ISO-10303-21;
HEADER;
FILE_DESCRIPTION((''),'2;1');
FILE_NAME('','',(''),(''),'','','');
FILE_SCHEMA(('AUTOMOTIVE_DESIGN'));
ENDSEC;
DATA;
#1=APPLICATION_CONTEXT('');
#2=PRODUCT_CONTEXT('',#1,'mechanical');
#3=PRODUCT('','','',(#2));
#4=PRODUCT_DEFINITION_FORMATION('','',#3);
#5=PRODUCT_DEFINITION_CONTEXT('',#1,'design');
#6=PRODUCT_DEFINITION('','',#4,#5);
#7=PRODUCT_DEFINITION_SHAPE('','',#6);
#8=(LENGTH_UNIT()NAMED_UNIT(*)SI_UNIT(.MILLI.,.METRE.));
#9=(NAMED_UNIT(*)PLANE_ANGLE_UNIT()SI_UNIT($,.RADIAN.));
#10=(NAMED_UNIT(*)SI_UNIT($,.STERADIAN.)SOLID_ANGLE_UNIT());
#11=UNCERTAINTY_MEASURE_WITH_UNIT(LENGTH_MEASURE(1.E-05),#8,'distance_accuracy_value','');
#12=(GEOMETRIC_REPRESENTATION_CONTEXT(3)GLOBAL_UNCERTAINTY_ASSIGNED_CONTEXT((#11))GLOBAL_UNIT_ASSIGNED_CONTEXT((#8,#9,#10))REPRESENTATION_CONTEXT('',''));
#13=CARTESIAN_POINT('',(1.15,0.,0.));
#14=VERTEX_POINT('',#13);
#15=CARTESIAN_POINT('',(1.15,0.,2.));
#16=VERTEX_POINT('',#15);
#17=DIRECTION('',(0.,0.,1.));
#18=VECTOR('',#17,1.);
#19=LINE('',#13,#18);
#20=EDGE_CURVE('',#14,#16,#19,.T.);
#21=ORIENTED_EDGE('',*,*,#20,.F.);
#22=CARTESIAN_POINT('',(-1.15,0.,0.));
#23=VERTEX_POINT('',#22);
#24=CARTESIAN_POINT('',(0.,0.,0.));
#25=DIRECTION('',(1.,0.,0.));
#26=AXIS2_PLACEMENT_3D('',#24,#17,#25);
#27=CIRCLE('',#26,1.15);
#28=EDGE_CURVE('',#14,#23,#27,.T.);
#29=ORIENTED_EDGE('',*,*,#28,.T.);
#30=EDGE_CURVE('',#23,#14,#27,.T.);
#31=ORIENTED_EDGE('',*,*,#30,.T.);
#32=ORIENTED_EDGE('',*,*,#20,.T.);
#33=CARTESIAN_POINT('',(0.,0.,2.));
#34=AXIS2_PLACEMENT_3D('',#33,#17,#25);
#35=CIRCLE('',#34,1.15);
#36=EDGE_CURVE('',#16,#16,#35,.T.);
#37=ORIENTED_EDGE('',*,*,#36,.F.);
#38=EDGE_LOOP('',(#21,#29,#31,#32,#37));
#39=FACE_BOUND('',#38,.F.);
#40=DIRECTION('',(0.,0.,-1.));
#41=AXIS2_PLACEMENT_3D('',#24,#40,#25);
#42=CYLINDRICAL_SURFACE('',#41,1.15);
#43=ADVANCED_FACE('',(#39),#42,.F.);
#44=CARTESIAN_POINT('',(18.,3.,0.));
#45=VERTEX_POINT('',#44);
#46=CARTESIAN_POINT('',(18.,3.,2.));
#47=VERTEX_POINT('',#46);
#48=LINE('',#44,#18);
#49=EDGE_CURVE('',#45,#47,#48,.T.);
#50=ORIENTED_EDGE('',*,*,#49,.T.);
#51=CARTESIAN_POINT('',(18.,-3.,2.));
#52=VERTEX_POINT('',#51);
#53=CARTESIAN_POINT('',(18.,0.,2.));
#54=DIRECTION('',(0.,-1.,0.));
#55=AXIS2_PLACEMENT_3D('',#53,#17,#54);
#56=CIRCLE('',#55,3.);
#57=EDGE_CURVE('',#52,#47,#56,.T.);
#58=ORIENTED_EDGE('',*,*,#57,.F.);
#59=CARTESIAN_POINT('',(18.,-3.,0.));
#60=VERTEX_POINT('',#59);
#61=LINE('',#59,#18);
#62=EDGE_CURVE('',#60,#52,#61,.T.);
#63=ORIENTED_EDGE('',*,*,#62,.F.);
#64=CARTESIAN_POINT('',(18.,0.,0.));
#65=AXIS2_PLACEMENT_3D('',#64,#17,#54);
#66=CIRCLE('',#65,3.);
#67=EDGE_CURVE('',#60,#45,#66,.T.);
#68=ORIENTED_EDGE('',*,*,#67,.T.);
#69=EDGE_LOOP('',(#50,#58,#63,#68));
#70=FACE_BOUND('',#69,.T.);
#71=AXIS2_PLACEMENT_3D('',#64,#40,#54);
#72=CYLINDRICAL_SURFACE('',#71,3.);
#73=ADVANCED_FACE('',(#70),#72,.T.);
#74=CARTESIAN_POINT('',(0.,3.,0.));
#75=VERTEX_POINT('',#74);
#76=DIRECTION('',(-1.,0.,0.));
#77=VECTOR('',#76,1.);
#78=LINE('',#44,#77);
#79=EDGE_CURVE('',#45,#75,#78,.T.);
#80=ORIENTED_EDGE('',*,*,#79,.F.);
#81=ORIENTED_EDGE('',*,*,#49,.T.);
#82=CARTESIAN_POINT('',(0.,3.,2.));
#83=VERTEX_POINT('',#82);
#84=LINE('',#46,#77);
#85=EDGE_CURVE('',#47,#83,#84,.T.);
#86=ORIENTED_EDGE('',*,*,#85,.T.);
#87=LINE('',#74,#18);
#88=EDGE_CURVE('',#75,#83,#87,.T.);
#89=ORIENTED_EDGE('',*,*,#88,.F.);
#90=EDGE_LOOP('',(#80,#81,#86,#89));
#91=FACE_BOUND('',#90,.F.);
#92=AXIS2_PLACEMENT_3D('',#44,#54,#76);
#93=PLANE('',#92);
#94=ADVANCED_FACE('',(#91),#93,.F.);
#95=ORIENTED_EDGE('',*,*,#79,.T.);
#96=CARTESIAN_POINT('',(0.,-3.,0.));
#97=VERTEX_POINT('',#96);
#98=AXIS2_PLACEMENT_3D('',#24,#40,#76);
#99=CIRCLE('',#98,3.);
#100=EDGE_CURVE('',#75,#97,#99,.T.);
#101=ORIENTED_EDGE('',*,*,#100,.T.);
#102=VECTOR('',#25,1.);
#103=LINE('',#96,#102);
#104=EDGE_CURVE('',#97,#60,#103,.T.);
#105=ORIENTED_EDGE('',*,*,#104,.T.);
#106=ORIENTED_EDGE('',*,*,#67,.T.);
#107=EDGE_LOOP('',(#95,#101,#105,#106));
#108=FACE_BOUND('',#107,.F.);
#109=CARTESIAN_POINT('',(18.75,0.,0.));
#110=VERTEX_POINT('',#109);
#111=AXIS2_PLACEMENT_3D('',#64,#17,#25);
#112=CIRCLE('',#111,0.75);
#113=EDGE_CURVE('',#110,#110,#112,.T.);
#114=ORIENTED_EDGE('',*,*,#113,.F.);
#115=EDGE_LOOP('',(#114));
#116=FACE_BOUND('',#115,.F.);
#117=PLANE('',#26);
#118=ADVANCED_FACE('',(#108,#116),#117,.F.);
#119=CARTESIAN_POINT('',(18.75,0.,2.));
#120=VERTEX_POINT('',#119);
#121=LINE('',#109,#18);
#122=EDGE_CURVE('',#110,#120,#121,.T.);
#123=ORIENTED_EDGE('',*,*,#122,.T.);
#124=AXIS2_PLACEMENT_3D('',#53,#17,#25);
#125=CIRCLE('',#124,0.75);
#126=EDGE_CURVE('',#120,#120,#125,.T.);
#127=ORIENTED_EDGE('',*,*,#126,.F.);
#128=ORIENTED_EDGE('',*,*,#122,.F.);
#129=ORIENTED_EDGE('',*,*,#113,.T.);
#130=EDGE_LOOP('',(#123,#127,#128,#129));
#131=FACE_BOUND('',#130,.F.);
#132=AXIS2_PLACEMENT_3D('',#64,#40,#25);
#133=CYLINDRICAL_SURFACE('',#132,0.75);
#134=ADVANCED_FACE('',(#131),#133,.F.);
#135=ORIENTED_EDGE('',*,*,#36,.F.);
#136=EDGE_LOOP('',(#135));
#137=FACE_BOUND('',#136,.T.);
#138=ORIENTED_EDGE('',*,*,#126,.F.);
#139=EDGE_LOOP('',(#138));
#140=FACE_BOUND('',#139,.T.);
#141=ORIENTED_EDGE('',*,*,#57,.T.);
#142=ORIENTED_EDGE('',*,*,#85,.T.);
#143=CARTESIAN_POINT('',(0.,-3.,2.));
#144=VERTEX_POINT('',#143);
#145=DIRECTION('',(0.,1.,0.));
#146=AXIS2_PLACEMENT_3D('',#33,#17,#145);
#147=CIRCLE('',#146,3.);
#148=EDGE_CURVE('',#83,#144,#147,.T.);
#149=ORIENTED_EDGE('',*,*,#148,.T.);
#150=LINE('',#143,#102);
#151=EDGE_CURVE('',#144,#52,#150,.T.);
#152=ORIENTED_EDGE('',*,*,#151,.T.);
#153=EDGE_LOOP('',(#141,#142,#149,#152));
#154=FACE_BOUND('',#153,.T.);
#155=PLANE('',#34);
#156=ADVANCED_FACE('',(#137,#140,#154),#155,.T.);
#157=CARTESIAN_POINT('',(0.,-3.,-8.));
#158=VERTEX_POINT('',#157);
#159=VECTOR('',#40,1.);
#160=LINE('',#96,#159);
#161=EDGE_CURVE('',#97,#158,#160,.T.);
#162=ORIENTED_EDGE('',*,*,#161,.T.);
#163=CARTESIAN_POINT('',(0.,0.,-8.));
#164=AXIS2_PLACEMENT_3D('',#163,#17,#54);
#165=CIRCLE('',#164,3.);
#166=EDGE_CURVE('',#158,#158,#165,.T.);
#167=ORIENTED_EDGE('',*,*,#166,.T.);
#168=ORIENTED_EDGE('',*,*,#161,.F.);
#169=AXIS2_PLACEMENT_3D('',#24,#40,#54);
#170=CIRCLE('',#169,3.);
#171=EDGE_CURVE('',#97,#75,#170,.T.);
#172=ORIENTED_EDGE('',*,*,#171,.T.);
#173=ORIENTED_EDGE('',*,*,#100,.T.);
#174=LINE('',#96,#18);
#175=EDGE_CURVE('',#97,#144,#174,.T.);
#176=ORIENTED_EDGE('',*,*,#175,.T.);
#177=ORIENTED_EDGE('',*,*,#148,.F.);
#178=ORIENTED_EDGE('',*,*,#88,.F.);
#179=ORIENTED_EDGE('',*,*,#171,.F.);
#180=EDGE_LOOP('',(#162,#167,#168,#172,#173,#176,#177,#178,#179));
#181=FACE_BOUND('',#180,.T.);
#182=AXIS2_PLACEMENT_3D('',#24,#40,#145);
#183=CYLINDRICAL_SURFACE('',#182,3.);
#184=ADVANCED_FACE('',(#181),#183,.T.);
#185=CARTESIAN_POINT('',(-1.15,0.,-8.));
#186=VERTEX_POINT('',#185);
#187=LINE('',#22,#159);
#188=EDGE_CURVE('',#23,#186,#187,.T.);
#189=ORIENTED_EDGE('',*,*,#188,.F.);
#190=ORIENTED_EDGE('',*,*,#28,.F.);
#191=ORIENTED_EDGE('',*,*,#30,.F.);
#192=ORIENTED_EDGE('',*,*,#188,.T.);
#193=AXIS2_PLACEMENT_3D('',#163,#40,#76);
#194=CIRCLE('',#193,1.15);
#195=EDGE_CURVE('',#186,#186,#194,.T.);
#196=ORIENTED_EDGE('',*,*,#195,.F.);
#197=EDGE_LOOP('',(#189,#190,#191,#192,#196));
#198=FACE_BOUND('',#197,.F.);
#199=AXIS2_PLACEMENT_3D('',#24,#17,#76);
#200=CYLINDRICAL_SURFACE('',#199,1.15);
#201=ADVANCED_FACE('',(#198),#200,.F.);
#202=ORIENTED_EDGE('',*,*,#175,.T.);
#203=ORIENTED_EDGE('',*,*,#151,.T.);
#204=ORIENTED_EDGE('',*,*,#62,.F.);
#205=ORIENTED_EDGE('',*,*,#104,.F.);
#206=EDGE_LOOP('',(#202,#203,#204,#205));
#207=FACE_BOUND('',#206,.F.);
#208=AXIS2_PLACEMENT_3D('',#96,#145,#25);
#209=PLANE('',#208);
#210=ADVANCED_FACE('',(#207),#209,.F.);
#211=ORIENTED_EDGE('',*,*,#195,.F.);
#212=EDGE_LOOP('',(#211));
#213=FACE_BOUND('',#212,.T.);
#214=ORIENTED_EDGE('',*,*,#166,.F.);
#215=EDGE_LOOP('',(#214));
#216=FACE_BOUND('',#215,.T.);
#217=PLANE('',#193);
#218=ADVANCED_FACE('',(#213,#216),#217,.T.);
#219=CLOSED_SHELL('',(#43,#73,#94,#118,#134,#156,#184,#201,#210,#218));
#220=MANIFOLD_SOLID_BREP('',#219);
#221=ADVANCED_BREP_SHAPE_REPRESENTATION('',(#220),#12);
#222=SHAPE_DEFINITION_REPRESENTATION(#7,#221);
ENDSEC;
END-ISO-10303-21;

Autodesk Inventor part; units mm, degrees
ref_plane "YZ Plane" through (0, 0, 0) normal (1, 0, 0) x (0, 1, 0)
ref_plane "XZ Plane" through (0, 0, 0) normal (0, 1, 0) x (-1, 0, 0)
ref_plane "XY Plane" through (0, 0, 0) normal (0, 0, 1) x (1, 0, 0)
sketch "Sketch1" plane through (0, 0, 0) normal (0, 0, 1) x (1, 0, 0)
  circle A0 centre (0, 0) radius 1.15
  line L0 (0, 0) -> (18, 0) construction
  line L1 (0, -3) -> (18, -3)
  line L2 (18, 3) -> (0, 3)
  arc A1 (0, 3) -> (0, -3) centre (0, 0) ccw
  arc A2 (18, -3) -> (18, 3) centre (18, 0) ccw
  circle A3 centre (18, 0) radius 0.75
  point P0 (9, 0)
  dimension "d0" = 2.3
  dimension "d1" = 3
  dimension "d2" = 1.5
  dimension "d3" = 18
extrude "Extrusion1" add sketch "Sketch1" along normal blind 2
sketch "Sketch2" plane through (0, 0, 0) normal (0, 0, -1) x (-1, 0, 0)
  arc A0 (0, -3) -> (0, 3) centre (0, 0) ccw projected
  circle A1 centre (0, 0) radius 3
  circle A2 centre (0, 0) radius 1.15
  circle A3 centre (0, 0) radius 1.15 projected
  point P0 (0, -3)
extrude "Extrusion2" add sketch "Sketch2" along normal blind 8
properties part number "ServoArm"
